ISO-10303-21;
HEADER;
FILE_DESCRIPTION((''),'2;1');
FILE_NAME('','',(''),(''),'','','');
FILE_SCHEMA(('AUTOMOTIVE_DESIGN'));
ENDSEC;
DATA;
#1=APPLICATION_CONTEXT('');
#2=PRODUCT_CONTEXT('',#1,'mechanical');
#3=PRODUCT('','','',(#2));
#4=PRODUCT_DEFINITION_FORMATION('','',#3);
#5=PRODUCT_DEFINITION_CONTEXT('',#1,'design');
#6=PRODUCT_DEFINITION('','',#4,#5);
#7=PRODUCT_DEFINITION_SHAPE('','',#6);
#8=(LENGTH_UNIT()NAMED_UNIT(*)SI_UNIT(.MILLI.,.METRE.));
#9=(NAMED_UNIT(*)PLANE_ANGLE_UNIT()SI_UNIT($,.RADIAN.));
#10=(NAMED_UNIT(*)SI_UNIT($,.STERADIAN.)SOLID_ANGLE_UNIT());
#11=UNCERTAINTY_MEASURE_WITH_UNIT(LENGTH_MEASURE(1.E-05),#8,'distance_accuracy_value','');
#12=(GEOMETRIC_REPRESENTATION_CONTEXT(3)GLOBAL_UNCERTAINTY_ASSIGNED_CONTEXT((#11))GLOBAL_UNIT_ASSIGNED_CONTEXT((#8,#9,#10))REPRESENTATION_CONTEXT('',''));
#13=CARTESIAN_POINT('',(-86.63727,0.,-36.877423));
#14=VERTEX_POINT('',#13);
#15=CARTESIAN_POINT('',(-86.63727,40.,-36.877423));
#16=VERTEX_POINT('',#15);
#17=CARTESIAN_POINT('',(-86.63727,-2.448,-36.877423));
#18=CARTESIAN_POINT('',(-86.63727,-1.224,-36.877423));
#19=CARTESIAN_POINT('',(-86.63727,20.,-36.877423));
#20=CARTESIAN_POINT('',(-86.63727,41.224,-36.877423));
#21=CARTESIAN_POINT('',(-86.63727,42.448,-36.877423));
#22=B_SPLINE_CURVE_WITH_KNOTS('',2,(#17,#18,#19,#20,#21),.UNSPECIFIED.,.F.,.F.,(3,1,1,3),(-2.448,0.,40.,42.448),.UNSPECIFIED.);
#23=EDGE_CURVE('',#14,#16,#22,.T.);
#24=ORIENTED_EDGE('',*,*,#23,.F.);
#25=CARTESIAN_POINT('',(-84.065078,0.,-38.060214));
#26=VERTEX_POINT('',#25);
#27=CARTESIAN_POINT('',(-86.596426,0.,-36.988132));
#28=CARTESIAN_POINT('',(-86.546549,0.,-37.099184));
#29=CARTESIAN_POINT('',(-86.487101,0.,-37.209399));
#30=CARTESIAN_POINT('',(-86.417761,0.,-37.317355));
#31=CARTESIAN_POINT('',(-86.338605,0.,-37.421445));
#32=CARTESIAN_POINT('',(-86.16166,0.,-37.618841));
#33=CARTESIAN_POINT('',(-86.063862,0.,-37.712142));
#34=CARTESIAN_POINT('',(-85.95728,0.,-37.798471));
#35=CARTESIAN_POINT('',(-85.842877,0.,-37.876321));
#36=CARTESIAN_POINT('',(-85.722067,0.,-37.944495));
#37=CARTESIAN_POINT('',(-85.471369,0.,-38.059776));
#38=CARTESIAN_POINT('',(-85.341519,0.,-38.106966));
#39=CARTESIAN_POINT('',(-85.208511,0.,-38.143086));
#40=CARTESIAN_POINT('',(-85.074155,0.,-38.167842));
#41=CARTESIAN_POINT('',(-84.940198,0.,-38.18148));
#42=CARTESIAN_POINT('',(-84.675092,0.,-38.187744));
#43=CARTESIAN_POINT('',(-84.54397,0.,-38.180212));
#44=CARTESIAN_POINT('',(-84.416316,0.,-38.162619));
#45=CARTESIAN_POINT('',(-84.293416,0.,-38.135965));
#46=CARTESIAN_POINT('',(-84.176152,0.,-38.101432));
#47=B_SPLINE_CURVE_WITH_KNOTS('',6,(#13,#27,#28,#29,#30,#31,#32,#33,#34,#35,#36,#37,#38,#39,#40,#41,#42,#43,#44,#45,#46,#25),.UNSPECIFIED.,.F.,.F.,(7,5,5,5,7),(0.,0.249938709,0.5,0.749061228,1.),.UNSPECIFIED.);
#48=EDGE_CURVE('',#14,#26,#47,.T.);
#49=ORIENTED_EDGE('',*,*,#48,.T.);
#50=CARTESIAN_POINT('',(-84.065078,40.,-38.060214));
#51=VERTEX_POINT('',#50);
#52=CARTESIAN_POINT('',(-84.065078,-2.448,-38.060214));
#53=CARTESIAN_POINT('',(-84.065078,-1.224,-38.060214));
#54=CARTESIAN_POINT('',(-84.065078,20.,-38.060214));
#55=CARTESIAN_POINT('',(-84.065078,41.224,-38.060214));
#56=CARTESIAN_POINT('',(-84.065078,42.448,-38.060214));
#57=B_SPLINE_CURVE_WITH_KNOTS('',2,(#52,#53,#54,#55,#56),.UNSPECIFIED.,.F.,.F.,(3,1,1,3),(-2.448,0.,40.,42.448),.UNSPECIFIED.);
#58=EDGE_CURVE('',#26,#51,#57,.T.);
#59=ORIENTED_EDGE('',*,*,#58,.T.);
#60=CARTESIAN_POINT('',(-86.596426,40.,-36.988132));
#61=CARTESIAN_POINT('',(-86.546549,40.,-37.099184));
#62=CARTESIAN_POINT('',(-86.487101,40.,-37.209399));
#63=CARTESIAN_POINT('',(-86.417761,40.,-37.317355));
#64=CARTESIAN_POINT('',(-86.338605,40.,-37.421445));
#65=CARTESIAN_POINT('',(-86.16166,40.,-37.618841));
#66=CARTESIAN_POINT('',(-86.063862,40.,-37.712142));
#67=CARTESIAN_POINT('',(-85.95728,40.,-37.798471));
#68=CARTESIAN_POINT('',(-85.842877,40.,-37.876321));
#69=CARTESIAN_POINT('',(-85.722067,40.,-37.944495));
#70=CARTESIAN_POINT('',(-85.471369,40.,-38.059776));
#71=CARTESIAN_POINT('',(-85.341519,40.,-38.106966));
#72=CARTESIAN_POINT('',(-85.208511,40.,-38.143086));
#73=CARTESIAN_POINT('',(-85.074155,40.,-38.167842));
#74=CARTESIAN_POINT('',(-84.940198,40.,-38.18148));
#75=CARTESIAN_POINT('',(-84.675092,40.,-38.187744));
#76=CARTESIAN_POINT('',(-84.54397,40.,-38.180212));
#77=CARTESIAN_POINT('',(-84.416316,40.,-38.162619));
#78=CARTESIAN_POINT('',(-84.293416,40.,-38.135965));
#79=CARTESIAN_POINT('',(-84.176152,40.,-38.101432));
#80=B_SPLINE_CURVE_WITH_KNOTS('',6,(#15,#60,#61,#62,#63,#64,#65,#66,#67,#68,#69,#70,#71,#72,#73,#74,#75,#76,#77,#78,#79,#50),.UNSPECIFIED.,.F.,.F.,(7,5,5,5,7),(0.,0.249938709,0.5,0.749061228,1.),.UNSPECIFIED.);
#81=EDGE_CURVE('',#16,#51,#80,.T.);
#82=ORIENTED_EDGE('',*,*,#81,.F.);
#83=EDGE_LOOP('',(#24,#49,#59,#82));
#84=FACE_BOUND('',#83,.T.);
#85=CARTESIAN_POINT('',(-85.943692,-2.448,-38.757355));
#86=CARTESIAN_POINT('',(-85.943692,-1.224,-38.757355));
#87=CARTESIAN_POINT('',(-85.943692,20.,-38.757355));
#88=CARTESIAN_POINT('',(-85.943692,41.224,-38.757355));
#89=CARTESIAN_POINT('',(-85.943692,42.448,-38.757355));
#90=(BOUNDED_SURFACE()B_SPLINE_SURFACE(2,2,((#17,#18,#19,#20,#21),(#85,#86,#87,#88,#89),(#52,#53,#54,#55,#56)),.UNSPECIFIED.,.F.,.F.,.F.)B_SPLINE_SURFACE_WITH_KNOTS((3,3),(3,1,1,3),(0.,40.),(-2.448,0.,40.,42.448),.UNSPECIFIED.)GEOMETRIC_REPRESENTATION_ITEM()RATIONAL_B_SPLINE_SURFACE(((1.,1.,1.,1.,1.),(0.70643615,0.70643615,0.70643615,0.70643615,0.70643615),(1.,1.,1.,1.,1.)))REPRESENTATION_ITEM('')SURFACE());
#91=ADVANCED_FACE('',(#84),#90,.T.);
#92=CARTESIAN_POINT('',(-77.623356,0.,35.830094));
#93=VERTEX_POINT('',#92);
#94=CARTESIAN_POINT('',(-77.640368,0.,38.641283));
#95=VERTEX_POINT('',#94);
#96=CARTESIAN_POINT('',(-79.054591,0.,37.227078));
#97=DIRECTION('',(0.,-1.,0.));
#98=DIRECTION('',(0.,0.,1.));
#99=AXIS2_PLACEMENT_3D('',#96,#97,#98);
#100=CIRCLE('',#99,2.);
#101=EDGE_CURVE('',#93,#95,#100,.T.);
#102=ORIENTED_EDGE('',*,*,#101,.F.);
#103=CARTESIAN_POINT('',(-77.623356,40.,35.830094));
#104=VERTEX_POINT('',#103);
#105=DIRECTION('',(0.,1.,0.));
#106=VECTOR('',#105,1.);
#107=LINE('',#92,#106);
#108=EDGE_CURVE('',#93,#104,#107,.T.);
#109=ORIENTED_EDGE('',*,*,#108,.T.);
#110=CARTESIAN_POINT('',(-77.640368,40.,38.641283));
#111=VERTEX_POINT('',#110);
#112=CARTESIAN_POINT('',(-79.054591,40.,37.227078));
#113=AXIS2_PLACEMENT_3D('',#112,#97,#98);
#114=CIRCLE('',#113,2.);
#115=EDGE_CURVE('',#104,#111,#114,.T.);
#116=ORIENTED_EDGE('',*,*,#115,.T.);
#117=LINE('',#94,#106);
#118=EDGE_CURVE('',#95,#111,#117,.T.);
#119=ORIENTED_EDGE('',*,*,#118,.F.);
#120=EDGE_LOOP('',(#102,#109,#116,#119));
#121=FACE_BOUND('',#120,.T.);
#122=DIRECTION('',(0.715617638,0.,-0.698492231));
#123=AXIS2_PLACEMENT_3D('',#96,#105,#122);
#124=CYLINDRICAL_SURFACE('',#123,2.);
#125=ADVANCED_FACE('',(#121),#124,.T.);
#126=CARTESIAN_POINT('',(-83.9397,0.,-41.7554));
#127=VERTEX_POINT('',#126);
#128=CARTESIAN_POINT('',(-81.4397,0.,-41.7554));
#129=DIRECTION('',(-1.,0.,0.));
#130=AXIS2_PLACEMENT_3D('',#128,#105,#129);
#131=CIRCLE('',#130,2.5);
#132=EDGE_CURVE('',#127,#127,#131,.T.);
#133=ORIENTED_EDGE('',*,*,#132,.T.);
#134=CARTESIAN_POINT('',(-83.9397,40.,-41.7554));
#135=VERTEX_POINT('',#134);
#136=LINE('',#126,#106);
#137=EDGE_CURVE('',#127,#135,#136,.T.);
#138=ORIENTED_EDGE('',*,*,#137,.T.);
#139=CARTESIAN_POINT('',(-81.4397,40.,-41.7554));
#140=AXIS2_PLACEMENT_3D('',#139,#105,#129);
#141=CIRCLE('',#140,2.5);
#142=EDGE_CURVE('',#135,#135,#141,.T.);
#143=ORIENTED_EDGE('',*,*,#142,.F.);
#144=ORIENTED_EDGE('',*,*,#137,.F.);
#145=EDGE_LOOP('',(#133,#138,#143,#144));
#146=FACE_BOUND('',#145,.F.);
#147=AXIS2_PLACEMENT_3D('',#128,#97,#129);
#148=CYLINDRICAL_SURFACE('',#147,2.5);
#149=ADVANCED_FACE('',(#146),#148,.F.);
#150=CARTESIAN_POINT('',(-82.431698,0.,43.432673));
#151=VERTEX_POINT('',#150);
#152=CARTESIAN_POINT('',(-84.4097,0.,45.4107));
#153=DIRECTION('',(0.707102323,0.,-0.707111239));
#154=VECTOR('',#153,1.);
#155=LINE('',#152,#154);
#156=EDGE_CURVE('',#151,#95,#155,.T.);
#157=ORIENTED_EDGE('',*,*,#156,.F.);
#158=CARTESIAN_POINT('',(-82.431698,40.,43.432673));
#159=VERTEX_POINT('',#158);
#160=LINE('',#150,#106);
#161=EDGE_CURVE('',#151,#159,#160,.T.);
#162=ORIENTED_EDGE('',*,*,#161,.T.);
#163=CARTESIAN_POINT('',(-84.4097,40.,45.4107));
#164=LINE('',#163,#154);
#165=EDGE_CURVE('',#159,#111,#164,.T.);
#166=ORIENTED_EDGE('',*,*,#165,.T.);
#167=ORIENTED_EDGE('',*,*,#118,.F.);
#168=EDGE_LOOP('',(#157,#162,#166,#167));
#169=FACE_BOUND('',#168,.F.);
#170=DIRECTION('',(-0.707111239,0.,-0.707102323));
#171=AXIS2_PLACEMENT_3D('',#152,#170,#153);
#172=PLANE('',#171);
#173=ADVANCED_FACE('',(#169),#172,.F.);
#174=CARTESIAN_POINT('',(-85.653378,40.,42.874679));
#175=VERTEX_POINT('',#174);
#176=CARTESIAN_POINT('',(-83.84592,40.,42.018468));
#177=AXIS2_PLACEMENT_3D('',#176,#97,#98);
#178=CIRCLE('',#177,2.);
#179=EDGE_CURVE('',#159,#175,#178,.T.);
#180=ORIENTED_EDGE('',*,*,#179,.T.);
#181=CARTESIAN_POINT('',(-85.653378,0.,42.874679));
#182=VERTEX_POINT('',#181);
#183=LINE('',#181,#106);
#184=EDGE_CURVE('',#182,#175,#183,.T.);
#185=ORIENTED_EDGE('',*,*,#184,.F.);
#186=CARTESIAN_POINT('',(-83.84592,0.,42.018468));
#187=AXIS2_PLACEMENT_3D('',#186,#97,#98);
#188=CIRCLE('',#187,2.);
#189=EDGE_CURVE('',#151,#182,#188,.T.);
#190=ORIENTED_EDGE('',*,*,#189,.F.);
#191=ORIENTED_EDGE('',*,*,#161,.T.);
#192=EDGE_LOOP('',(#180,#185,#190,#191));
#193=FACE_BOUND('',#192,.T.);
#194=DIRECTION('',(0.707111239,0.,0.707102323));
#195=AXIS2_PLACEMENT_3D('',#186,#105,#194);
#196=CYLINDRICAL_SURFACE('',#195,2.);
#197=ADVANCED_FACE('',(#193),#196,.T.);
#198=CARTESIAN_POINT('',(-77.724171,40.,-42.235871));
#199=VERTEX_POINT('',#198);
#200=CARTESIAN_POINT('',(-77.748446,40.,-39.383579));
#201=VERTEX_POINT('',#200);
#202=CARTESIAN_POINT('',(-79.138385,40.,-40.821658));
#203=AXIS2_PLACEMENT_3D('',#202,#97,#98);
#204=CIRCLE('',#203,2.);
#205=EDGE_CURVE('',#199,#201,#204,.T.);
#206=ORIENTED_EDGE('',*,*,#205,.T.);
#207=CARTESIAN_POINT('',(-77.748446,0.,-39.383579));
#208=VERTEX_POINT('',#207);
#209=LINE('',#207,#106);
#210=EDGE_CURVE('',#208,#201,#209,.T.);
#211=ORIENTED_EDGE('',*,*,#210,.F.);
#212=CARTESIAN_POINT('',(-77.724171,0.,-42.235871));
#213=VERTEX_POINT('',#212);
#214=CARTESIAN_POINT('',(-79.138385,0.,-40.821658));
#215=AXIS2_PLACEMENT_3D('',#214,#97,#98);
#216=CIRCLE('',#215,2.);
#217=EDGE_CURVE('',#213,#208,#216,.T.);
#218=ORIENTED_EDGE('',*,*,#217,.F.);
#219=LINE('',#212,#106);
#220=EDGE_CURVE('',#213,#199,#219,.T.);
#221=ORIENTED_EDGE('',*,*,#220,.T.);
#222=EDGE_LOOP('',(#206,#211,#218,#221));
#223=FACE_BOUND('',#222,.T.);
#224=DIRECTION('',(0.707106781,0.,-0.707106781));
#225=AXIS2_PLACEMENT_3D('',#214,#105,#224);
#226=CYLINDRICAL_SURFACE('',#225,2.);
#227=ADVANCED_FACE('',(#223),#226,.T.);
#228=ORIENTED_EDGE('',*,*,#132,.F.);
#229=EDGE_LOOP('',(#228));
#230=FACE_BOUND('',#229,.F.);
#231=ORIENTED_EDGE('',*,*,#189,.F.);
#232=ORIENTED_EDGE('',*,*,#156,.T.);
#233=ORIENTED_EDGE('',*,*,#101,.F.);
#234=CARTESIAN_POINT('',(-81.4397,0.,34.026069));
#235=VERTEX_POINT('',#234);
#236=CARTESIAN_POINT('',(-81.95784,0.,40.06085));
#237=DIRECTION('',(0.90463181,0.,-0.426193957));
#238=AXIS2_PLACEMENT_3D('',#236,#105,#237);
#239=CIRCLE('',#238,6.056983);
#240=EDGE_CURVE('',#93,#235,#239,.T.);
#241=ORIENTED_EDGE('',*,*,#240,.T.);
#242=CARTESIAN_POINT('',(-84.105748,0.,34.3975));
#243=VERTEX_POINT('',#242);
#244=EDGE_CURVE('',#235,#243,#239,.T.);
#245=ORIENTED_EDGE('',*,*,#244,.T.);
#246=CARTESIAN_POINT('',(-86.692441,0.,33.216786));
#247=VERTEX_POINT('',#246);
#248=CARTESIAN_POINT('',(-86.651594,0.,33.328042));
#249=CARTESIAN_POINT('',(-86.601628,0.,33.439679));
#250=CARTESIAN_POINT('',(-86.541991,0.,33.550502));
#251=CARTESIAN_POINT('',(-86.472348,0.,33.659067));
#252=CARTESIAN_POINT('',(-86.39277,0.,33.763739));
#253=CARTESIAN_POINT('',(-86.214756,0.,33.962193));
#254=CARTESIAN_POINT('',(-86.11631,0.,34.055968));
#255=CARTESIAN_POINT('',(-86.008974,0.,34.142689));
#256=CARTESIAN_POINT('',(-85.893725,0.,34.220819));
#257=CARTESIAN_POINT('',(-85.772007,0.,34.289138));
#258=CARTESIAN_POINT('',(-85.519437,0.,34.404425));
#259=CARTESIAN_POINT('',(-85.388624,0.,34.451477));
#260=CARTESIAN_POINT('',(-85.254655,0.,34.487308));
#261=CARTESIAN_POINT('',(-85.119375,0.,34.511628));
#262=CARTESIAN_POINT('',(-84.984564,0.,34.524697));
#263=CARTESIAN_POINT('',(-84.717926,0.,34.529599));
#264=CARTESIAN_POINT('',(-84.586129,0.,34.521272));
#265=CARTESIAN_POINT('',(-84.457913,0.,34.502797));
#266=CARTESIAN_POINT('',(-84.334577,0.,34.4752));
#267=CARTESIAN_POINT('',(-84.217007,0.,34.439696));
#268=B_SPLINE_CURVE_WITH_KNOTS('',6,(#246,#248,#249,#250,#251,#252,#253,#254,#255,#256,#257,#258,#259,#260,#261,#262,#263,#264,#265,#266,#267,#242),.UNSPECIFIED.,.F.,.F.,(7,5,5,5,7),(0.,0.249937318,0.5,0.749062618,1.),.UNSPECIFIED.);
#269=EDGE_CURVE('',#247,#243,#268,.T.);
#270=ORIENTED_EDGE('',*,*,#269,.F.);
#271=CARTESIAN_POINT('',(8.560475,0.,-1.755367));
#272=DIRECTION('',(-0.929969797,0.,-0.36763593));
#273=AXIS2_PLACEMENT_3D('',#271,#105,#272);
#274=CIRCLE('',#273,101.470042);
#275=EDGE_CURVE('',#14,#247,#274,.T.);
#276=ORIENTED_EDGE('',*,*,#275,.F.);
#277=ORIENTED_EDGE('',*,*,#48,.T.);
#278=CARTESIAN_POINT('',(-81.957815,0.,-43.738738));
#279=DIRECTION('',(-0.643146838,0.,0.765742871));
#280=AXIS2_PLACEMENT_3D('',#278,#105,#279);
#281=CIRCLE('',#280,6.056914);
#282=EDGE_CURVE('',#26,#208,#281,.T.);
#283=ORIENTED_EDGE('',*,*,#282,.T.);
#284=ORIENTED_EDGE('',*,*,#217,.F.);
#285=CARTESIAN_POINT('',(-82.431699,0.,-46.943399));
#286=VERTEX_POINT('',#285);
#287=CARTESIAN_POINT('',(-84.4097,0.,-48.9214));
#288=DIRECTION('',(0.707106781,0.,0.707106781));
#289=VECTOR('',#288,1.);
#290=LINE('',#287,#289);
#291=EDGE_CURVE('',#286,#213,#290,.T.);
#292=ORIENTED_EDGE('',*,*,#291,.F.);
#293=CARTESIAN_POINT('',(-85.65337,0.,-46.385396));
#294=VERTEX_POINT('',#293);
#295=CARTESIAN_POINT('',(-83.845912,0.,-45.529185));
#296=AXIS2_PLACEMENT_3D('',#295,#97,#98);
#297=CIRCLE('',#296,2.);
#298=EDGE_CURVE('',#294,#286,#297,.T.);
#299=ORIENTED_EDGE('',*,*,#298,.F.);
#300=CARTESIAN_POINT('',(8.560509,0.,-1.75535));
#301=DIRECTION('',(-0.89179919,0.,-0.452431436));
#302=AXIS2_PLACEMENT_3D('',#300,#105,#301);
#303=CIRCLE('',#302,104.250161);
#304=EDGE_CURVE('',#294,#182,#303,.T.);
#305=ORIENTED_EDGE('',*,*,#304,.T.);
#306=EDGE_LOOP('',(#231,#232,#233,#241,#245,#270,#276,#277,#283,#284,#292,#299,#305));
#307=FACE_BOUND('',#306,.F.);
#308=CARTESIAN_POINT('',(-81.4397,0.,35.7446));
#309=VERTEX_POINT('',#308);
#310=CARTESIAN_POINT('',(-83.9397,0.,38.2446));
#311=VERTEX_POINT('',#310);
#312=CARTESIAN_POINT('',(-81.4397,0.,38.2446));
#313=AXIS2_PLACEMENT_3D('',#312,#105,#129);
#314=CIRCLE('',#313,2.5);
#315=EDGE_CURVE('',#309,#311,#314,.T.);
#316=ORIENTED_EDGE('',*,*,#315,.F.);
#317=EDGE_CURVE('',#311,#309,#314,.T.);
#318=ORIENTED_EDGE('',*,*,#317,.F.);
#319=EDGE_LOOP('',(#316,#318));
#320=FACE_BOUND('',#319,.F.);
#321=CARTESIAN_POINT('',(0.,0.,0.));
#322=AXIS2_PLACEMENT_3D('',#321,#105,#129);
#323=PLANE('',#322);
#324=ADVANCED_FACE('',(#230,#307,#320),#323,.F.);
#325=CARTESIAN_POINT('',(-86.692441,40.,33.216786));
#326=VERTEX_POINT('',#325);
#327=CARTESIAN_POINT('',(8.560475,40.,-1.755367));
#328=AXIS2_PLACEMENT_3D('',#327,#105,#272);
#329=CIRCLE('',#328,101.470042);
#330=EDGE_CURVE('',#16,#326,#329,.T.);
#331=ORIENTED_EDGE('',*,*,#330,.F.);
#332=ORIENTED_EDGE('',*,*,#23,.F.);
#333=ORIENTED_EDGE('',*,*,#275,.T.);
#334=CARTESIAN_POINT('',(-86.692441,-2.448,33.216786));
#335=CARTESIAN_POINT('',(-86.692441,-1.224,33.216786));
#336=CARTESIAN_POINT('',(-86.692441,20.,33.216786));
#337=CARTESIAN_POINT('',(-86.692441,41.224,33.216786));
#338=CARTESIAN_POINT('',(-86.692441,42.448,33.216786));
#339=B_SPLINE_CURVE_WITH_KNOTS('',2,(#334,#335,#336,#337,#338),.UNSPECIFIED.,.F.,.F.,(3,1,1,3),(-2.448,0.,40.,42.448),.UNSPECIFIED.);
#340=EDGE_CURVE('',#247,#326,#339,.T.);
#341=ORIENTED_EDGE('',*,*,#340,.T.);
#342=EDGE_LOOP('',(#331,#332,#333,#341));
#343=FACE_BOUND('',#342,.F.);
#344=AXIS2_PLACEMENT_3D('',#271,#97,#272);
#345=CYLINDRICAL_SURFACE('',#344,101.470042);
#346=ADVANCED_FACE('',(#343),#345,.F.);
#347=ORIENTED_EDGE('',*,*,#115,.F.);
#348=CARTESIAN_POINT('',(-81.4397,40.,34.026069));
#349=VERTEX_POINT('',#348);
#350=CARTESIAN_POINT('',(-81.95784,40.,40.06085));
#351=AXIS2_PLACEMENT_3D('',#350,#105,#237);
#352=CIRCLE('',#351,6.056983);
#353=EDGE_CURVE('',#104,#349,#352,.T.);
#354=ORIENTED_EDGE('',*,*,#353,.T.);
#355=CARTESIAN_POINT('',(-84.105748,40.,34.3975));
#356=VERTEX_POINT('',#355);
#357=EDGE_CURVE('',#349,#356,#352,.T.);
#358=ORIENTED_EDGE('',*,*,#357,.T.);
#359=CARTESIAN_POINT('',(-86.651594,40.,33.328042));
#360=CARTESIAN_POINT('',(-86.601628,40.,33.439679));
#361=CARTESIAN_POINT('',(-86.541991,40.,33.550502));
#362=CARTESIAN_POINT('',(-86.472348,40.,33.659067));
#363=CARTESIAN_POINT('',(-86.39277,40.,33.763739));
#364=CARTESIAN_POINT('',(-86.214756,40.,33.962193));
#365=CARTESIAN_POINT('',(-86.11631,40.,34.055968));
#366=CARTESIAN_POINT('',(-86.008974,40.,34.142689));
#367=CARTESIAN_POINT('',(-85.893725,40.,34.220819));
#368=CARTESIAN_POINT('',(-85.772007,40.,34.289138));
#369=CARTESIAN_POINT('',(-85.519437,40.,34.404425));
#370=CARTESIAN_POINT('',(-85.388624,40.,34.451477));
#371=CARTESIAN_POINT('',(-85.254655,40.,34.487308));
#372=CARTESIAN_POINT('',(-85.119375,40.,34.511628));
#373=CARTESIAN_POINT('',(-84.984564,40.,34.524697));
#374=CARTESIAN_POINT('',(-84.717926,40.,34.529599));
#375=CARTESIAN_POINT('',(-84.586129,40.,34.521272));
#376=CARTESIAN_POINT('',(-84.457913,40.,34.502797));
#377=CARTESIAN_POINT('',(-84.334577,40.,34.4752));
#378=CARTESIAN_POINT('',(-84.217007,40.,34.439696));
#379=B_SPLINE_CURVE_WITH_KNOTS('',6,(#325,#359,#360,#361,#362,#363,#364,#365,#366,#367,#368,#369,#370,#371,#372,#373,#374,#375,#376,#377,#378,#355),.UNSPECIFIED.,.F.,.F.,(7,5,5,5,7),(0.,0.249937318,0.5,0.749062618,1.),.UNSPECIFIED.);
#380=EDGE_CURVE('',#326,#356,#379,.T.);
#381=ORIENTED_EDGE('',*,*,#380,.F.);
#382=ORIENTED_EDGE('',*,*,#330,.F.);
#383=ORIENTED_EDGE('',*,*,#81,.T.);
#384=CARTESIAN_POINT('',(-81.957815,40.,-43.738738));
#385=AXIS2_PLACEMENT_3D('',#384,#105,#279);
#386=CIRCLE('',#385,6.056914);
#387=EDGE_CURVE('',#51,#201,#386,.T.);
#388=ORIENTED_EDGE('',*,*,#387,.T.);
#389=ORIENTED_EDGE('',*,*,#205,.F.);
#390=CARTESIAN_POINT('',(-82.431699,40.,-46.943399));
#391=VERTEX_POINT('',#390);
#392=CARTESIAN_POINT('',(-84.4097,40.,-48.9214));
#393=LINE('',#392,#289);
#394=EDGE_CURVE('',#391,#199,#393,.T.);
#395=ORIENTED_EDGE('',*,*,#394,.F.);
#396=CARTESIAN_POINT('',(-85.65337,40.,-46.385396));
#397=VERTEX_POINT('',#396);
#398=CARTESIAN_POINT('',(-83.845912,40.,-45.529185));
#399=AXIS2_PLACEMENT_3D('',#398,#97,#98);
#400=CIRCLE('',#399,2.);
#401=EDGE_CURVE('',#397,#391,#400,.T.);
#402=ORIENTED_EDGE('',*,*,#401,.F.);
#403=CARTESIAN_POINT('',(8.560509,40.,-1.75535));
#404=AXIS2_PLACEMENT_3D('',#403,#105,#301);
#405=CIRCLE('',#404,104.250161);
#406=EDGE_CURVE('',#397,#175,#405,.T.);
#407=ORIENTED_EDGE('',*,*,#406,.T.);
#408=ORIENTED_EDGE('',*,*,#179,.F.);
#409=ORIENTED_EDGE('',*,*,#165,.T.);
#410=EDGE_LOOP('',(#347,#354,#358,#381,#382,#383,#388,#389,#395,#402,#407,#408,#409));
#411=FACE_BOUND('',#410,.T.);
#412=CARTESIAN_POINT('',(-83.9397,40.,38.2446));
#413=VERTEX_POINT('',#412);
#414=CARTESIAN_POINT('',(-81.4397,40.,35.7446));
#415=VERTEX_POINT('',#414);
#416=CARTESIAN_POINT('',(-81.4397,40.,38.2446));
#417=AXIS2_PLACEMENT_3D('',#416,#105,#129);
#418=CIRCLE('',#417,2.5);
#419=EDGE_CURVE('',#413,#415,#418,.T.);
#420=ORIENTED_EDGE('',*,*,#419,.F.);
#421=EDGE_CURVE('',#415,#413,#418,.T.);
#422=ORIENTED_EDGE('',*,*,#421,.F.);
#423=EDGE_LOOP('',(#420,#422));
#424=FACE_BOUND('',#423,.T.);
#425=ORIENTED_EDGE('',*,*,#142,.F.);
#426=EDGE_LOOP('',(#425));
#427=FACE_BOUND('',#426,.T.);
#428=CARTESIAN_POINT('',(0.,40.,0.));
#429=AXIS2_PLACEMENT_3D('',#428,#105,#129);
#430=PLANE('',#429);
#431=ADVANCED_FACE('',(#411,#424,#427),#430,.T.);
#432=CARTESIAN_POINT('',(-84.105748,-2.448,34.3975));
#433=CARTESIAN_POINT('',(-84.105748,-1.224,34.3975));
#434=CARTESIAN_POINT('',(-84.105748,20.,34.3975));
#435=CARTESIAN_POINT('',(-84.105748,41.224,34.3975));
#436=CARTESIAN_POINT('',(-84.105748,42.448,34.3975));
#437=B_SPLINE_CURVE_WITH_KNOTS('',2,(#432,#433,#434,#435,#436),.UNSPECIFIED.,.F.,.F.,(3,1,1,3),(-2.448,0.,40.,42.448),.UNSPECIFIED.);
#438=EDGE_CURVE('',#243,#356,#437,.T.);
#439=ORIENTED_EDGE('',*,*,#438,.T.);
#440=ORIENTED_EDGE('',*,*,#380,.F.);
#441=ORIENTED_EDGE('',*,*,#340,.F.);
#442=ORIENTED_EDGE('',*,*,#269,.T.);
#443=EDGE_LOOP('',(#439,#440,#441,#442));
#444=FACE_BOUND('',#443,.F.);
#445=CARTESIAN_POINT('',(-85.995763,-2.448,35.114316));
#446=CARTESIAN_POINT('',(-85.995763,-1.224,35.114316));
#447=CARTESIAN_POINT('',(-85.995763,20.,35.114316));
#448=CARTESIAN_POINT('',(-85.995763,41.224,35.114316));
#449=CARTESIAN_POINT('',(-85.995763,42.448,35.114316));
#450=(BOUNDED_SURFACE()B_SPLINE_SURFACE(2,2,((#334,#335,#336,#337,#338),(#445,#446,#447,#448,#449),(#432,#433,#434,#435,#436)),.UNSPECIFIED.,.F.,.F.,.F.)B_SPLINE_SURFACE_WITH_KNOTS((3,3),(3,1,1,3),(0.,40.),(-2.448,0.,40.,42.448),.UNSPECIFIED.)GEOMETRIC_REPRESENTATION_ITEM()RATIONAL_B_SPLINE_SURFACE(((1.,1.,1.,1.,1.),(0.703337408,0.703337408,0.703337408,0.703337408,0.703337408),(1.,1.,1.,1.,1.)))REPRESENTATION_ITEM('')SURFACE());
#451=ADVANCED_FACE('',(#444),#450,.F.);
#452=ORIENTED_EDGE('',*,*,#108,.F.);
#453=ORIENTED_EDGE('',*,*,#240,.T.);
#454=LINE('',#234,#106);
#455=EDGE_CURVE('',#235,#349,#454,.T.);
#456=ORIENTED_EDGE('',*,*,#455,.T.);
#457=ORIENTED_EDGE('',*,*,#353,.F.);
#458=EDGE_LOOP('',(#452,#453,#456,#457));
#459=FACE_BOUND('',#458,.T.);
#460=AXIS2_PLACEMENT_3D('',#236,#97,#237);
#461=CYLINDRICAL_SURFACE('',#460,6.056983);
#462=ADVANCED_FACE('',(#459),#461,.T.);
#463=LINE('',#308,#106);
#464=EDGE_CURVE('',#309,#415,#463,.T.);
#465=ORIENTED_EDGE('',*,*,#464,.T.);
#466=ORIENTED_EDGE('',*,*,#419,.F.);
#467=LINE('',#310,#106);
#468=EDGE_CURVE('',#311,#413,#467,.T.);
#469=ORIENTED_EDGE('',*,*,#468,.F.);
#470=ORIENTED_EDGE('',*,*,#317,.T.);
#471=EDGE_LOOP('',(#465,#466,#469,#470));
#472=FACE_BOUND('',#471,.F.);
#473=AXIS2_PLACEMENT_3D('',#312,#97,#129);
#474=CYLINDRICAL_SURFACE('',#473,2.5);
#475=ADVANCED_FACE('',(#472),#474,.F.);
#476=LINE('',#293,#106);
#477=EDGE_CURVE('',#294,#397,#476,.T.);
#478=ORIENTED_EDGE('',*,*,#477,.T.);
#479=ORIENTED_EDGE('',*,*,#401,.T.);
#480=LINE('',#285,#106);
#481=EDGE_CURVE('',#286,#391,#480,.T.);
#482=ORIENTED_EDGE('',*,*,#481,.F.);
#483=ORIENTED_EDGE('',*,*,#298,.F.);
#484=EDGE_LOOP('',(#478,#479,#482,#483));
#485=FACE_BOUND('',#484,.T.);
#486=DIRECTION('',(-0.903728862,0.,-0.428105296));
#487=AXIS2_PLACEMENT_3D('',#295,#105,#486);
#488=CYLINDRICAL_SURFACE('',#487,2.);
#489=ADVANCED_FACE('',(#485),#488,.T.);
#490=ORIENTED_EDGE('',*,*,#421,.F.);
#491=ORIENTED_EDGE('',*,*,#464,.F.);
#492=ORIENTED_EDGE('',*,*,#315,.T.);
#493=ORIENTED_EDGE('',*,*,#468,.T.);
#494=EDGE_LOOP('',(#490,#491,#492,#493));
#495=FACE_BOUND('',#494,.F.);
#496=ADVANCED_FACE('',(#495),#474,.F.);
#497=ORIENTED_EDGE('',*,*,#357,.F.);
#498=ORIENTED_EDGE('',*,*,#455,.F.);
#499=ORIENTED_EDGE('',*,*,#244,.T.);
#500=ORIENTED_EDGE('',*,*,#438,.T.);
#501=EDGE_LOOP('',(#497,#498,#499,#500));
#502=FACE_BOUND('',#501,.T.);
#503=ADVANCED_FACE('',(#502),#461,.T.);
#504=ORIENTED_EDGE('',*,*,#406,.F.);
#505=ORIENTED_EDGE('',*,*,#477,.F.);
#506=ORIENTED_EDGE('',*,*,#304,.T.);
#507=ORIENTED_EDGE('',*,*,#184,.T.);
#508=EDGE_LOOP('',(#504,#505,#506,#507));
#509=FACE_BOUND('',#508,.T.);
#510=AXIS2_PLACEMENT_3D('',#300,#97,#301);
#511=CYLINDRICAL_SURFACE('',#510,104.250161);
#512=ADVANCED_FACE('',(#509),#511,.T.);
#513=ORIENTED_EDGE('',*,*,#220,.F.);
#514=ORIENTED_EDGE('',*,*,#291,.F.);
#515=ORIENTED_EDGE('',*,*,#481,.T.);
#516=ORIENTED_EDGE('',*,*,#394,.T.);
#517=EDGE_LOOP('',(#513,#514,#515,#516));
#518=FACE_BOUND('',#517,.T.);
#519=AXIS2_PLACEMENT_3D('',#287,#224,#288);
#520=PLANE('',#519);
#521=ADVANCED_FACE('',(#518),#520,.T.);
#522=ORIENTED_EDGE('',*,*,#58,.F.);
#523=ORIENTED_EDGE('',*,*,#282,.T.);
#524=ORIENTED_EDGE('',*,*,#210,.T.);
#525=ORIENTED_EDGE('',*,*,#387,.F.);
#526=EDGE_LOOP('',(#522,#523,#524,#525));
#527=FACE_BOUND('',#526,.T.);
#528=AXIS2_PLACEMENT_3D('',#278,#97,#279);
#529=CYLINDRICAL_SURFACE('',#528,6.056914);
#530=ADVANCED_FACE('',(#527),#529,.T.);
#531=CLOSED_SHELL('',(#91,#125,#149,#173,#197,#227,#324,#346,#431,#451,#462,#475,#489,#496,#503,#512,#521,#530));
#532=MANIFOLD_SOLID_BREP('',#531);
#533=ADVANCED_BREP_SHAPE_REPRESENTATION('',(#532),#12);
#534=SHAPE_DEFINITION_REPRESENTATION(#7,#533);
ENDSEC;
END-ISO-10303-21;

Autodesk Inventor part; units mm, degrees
ref_plane "YZ Plane" through (0, 0, 0) normal (1, 0, 0) x (0, 1, 0)
ref_plane "XZ Plane" through (0, 0, 0) normal (0, 1, 0) x (-1, 0, 0)
ref_plane "XY Plane" through (0, 0, 0) normal (0, 0, 1) x (1, 0, 0)
sketch "Sketch1" plane through (0, 0, 0) normal (0, 1, 0) x (-1, 0, 0)
  line L0 (-57.8698, 32.3928) -> (-57.8698, 32.0292)
  line L1 (-57.8698, 32.0292) -> (-57.8698, 18.4092)
  line L2 (-57.8698, 18.4092) -> (-57.8698, 4.7892)
  line L3 (-57.8698, 4.7892) -> (-57.8698, -8.8308)
  line L4 (-57.8698, -8.8308) -> (-57.8698, -22.4508)
  line L5 (-57.8698, -1.839) -> (-57.8698, -36.0708)
  line L6 (-57.8698, -36.0708) -> (-54.7847, -36.7468)
  line L7 (-54.7847, -36.7468) -> (-50.239, -34.4141)
  line L8 (-50.239, -34.4141) -> (-38.1725, -14.554)
  line L9 (-38.1725, -14.554) -> (-34.8422, -12.8451)
  line L10 (-34.8422, -12.8451) -> (-8.0341, -30.0588)
  line L11 (-8.0341, -30.0588) -> (-8.0341, -78.5822)
  line L12 (-8.0341, -78.5822) -> (-8.0341, -99.6831)
  line L13 (-8.0341, -99.6831) -> (-7.0952, -101.449)
  line L14 (-7.0952, -101.449) -> (-2.0952, -101.449)
  line L15 (-1.1562, -99.6831) -> (-2.0952, -101.449)
  line L16 (-1.1562, -78.5822) -> (-1.1562, -99.6831)
  line L17 (-1.1562, -30.0588) -> (-1.1562, -78.5822)
  line L18 (-1.1562, -30.0588) -> (21.4276, -7.475)
  line L19 (21.4276, -7.475) -> (24.147, -4.7556)
  line L20 (24.147, -4.7556) -> (89.8399, -4.7556)
  line L21 (89.8399, -4.7556) -> (91.6058, -3.8166)
  line L22 (91.6058, 0.1386) -> (91.6058, -3.8166)
  line L23 (89.8399, 1.0776) -> (91.6058, 0.1386)
  line L24 (24.147, 1.0776) -> (89.8399, 1.0776)
  line L25 (21.4276, 3.797) -> (24.147, 1.0776)
  line L26 (-1.1562, 26.3808) -> (21.4276, 3.797)
  line L27 (-1.1562, 26.3808) -> (-1.1562, 74.9042)
  line L28 (-1.1562, 74.9042) -> (-1.1562, 96.0051)
  line L29 (-1.1562, 96.0051) -> (-2.0952, 97.771)
  line L30 (-7.0952, 97.771) -> (-2.0952, 97.771)
  line L31 (-8.0341, 96.0051) -> (-7.0952, 97.771)
  line L32 (-8.0341, 74.9042) -> (-8.0341, 96.0051)
  line L33 (-8.0341, 74.9042) -> (-8.0341, 96.0051)
  line L34 (-8.0341, 26.3808) -> (-8.0341, 74.9042)
  line L35 (-8.0341, 26.3808) -> (-8.0341, 74.9042)
  line L36 (-8.0341, 26.3808) -> (-8.0341, 74.9042)
  line L37 (-8.0341, 26.3808) -> (-8.0341, 74.9042)
  line L38 (-34.8422, 9.1671) -> (-8.0341, 26.3808)
  line L39 (-38.1725, 10.876) -> (-34.8422, 9.1671)
  line L40 (-50.239, 30.7361) -> (-38.1725, 10.876)
  line L41 (-54.7847, 33.0688) -> (-50.239, 30.7361)
  line L42 (-57.8698, 32.3928) -> (-54.7847, 33.0688)
  line L43 (-57.8698, -1.839) -> (-57.8698, -36.0708)
  line L44 (-57.8698, -1.839) -> (-57.8698, -36.0708)
  line L45 (-57.8698, -1.839) -> (-57.8698, -36.0708)
  line L46 (-57.8698, -36.0708) -> (-54.7847, -36.7468)
  line L47 (-54.7847, -36.7468) -> (-50.239, -34.4141)
  line L48 (-50.239, -34.4141) -> (-38.1725, -14.554)
  line L49 (-38.1725, -14.554) -> (-34.8422, -12.8451)
  line L50 (-34.8422, -12.8451) -> (-8.0341, -30.0588)
  line L51 (-8.0341, -30.0588) -> (-8.0341, -78.5822)
  line L52 (-8.0341, -78.5822) -> (-8.0341, -99.6831)
  line L53 (-8.0341, -99.6831) -> (-7.0952, -101.449)
  line L54 (-7.0952, -101.449) -> (-2.0952, -101.449)
  line L55 (-1.1562, -99.6831) -> (-2.0952, -101.449)
  line L56 (-1.1562, -78.5822) -> (-1.1562, -99.6831)
  line L57 (-1.1562, -30.0588) -> (-1.1562, -78.5822)
  line L58 (-1.1562, -30.0588) -> (21.4276, -7.475)
  line L59 (21.4276, -7.475) -> (24.147, -4.7556)
  line L60 (24.147, -4.7556) -> (89.8399, -4.7556)
  line L61 (89.8399, -4.7556) -> (91.6058, -3.8166)
  line L62 (91.6058, 0.1386) -> (91.6058, -3.8166)
  line L63 (89.8399, 1.0776) -> (91.6058, 0.1386)
  line L64 (24.147, 1.0776) -> (89.8399, 1.0776)
  line L65 (21.4276, 3.797) -> (24.147, 1.0776)
  line L66 (-1.1562, 26.3808) -> (21.4276, 3.797)
  line L67 (-1.1562, 26.3808) -> (-1.1562, 74.9042)
  line L68 (-1.1562, 74.9042) -> (-1.1562, 96.0051)
  line L69 (-1.1562, 96.0051) -> (-2.0952, 97.771)
  line L70 (-7.0952, 97.771) -> (-2.0952, 97.771)
  line L71 (-8.0341, 96.0051) -> (-7.0952, 97.771)
  line L72 (-8.0341, 74.9042) -> (-8.0341, 96.0051)
  line L73 (-8.0341, 69.2148) -> (-8.0341, 83.4928)
  line L74 (-8.0341, 54.9368) -> (-8.0341, 69.2148)
  line L75 (-8.0341, 40.6588) -> (-8.0341, 54.9368)
  line L76 (-8.0341, 26.3808) -> (-8.0341, 40.6588)
  line L77 (-34.8422, 9.1671) -> (-8.0341, 26.3808)
  line L78 (-38.1725, 10.876) -> (-34.8422, 9.1671)
  line L79 (-50.239, 30.7361) -> (-38.1725, 10.876)
  line L80 (-54.7847, 33.0688) -> (-50.239, 30.7361)
  line L81 (-57.8698, 32.3928) -> (-54.7847, 33.0688)
  line L82 (-57.8698, 32.3928) -> (-57.8698, 32.0292)
  line L83 (-57.8698, 32.0292) -> (-57.8698, 18.4092)
  line L84 (-57.8698, -1.839) -> (-57.8698, 26.3808)
  line L85 (-57.8698, -1.839) -> (-57.8698, 26.3808)
  line L86 (-8.0341, 26.3808) -> (-8.0341, 40.6588)
  line L87 (-34.8422, 9.1671) -> (-8.0341, 26.3808)
  line L88 (-38.1725, 10.876) -> (-34.8422, 9.1671)
  line L89 (-50.239, 30.7361) -> (-38.1725, 10.876)
  line L90 (-54.7847, 33.0688) -> (-50.239, 30.7361)
  line L91 (-57.8698, 32.3928) -> (-54.7847, 33.0688)
  line L92 (-57.8698, 32.3928) -> (-57.8698, 32.0292)
  line L93 (-57.8698, 32.0292) -> (-57.8698, 18.4092)
  line L94 (-57.8698, -1.839) -> (-57.8698, 26.3808)
  line L95 (-57.8698, -1.839) -> (-57.8698, 26.3808)
  line L96 (-57.8698, -1.839) -> (-57.8698, -36.0708)
  line L97 (-57.8698, -1.839) -> (-57.8698, -36.0708)
  line L98 (-57.8698, -1.839) -> (-57.8698, -36.0708)
  line L99 (-57.8698, -36.0708) -> (-54.7847, -36.7468)
  line L100 (-54.7847, -36.7468) -> (-50.239, -34.4141)
  line L101 (-50.239, -34.4141) -> (-38.1725, -14.554)
  line L102 (-38.1725, -14.554) -> (-34.8422, -12.8451)
  line L103 (-34.8422, -12.8451) -> (-8.0341, -30.0588)
  line L104 (-8.0341, -30.0588) -> (-8.0341, -78.5822)
  line L105 (-8.0341, -78.5822) -> (-8.0341, -99.6831)
  line L106 (-8.0341, -99.6831) -> (-7.0952, -101.449)
  line L107 (-7.0952, -101.449) -> (-2.0952, -101.449)
  line L108 (-1.1562, -99.6831) -> (-2.0952, -101.449)
  line L109 (-1.1562, -78.5822) -> (-1.1562, -99.6831)
  line L110 (-1.1562, -30.0588) -> (-1.1562, -78.5822)
  line L111 (-1.1562, -30.0588) -> (21.4276, -7.475)
  line L112 (21.4276, -7.475) -> (24.147, -4.7556)
  line L113 (24.147, -4.7556) -> (89.8399, -4.7556)
  line L114 (89.8399, -4.7556) -> (91.6058, -3.8166)
  line L115 (91.6058, 0.1386) -> (91.6058, -3.8166)
  line L116 (89.8399, 1.0776) -> (91.6058, 0.1386)
  line L117 (24.147, 1.0776) -> (89.8399, 1.0776)
  line L118 (21.4276, 3.797) -> (24.147, 1.0776)
  line L119 (-1.1562, 26.3808) -> (21.4276, 3.797)
  line L120 (-1.1562, 26.3808) -> (-1.1562, 74.9042)
  line L121 (-1.1562, 74.9042) -> (-1.1562, 96.0051)
  line L122 (-1.1562, 96.0051) -> (-2.0952, 97.771)
  line L123 (-7.0952, 97.771) -> (-2.0952, 97.771)
  line L124 (-8.0341, 96.0051) -> (-7.0952, 97.771)
  line L125 (-8.0341, 74.9042) -> (-8.0341, 96.0051)
  line L126 (-8.0341, 69.2148) -> (-8.0341, 83.4928)
  line L127 (-8.0341, 54.9368) -> (-8.0341, 69.2148)
  line L128 (-8.0341, 26.3808) -> (-8.0341, 74.9042)
  line L129 (-57.8698, -1.839) -> (-57.8698, 26.3808)
  line L130 (-57.8698, -1.839) -> (-57.8698, 26.3808)
  line L131 (-57.8698, -1.839) -> (-57.8698, 26.3808)
  line L132 (-57.8698, -1.839) -> (-57.8698, -36.0708)
  line L133 (-57.8698, -1.839) -> (-57.8698, -36.0708)
  line L134 (-57.8698, -1.839) -> (-57.8698, -36.0708)
  line L135 (-57.8698, -36.0708) -> (-54.7847, -36.7468)
  line L136 (-54.7847, -36.7468) -> (-50.239, -34.4141)
  line L137 (-50.239, -34.4141) -> (-38.1725, -14.554)
  line L138 (-38.1725, -14.554) -> (-34.8422, -12.8451)
  line L139 (-34.8422, -12.8451) -> (-8.0341, -30.0588)
  line L140 (-8.0341, -30.0588) -> (-8.0341, -78.5822)
  line L141 (-8.0341, -78.5822) -> (-8.0341, -99.6831)
  line L142 (-8.0341, -99.6831) -> (-7.0952, -101.449)
  line L143 (-7.0952, -101.449) -> (-2.0952, -101.449)
  line L144 (-1.1562, -99.6831) -> (-2.0952, -101.449)
  line L145 (-1.1562, -78.5822) -> (-1.1562, -99.6831)
  line L146 (-1.1562, -30.0588) -> (-1.1562, -78.5822)
  line L147 (-1.1562, -30.0588) -> (21.4276, -7.475)
  line L148 (21.4276, -7.475) -> (24.147, -4.7556)
  line L149 (24.147, -4.7556) -> (89.8399, -4.7556)
  line L150 (89.8399, -4.7556) -> (91.6058, -3.8166)
  line L151 (91.6058, 0.1386) -> (91.6058, -3.8166)
  line L152 (89.8399, 1.0776) -> (91.6058, 0.1386)
  line L153 (24.147, 1.0776) -> (89.8399, 1.0776)
  line L154 (21.4276, 3.797) -> (24.147, 1.0776)
  line L155 (-1.1562, 26.3808) -> (21.4276, 3.797)
  line L156 (-1.1562, 26.3808) -> (-1.1562, 74.9042)
  line L157 (-1.1562, 74.9042) -> (-1.1562, 96.0051)
  line L158 (-1.1562, 96.0051) -> (-2.0952, 97.771)
  line L159 (-7.0952, 97.771) -> (-2.0952, 97.771)
  line L160 (-8.0341, 96.0051) -> (-7.0952, 97.771)
  line L161 (-8.0341, 74.9042) -> (-8.0341, 96.0051)
  line L162 (-8.0341, 69.2148) -> (-8.0341, 83.4928)
  line L163 (-8.0341, 54.9368) -> (-8.0341, 69.2148)
  line L164 (-8.0341, 40.6588) -> (-8.0341, 54.9368)
  line L165 (-8.0341, 26.3808) -> (-8.0341, 40.6588)
  line L166 (-34.8422, 9.1671) -> (-8.0341, 26.3808)
  line L167 (-38.1725, 10.876) -> (-34.8422, 9.1671)
  line L168 (-50.239, 30.7361) -> (-38.1725, 10.876)
  line L169 (-54.7847, 33.0688) -> (-50.239, 30.7361)
  line L170 (-57.8698, 32.3928) -> (-54.7847, 33.0688)
  line L171 (-57.8698, 32.3928) -> (-57.8698, 32.0292)
  line L172 (-57.8698, 26.3808) -> (-57.8698, 32.0292)
  line L173 (-57.8698, 32.0292) -> (-57.8698, 32.3928)
  line L174 (-57.8698, 32.3928) -> (-54.7847, 33.0688)
  line L175 (-54.7847, 33.0688) -> (-50.239, 30.7361)
  line L176 (-50.239, 30.7361) -> (-38.1725, 10.876)
  line L177 (-38.1725, 10.876) -> (-34.8422, 9.1671)
  line L178 (-34.8422, 9.1671) -> (-8.0341, 26.3808)
  line L179 (-8.0341, 26.3808) -> (-8.0341, 74.9042)
  line L180 (-8.0341, 74.9042) -> (-8.0341, 96.0051)
  line L181 (-8.0341, 96.0051) -> (-7.0952, 97.771)
  line L182 (-7.0952, 97.771) -> (-2.0952, 97.771)
  line L183 (-2.0952, 97.771) -> (-1.1562, 96.0051)
  line L184 (-1.1562, 96.0051) -> (-1.1562, 74.9042)
  line L185 (-1.1562, 74.9042) -> (-1.1562, 26.3808)
  line L186 (-1.1562, 26.3808) -> (21.4276, 3.797)
  line L187 (21.4276, 3.797) -> (24.147, 1.0776)
  line L188 (24.147, 1.0776) -> (89.8399, 1.0776)
  line L189 (89.8399, 1.0776) -> (91.6058, 0.1386)
  line L190 (91.6058, 0.1386) -> (91.6058, -3.8166)
  line L191 (91.6058, -3.8166) -> (89.8399, -4.7556)
  line L192 (89.8399, -4.7556) -> (24.147, -4.7556)
  line L193 (24.147, -4.7556) -> (21.4276, -7.475)
  line L194 (21.4276, -7.475) -> (-1.1562, -30.0588)
  line L195 (-57.8698, 32.0292) -> (-57.8698, 26.3808)
  line L196 (-57.8698, 26.3808) -> (-57.8698, -1.839)
  line L197 (-57.8698, -1.839) -> (-57.8698, -36.0708)
  line L198 (-57.8698, -36.0708) -> (-54.7847, -36.7468)
  line L199 (-54.7847, -36.7468) -> (-50.239, -34.4141)
  line L200 (-50.239, -34.4141) -> (-38.1725, -14.554)
  line L201 (-38.1725, -14.554) -> (-34.8422, -12.8451)
  line L202 (-34.8422, -12.8451) -> (-8.0341, -30.0588)
  line L203 (-8.0341, -30.0588) -> (-8.0341, -78.5822)
  line L204 (-8.0341, -78.5822) -> (-8.0341, -99.6831)
  line L205 (-8.0341, -99.6831) -> (-7.0952, -101.449)
  line L206 (-7.0952, -101.449) -> (-2.0952, -101.449)
  line L207 (-2.0952, -101.449) -> (-1.1562, -99.6831)
  line L208 (-1.1562, -99.6831) -> (-1.1562, -78.5822)
  line L209 (-1.1562, -78.5822) -> (-1.1562, -30.0588)
  line L210 (77.614, -1.839) -> (78.114, -1.839)
  line L211 (78.114, -1.839) -> (78.614, -1.839)
  line L212 (64.1222, -1.839) -> (64.6222, -1.839)
  line L213 (64.6222, -1.839) -> (65.1222, -1.839)
  line L214 (51.6304, -1.839) -> (51.1304, -1.839)
  line L215 (51.1304, -1.839) -> (50.6304, -1.839)
  line L216 (38.1386, -1.839) -> (37.6386, -1.839)
  line L217 (37.6386, -1.839) -> (37.1386, -1.839)
  line L218 (-57.8698, -22.4508) -> (-55.8698, -22.4508)
  line L219 (-55.8698, -22.4508) -> (-55.8698, -22.9508)
  line L220 (-55.8698, -22.4508) -> (-55.8698, -21.9508)
  line L221 (-57.8698, -8.8308) -> (-55.8698, -8.8308)
  line L222 (-55.8698, -8.8308) -> (-55.8698, -9.3308)
  line L223 (-55.8698, -8.8308) -> (-55.8698, -8.3308)
  line L224 (-57.8698, 4.7892) -> (-55.8698, 4.7892)
  line L225 (-55.8698, 4.7892) -> (-55.8698, 4.2892)
  line L226 (-55.8698, 4.7892) -> (-55.8698, 5.2892)
  line L227 (-55.8698, 18.4092) -> (-55.8698, 18.9092)
  line L228 (-55.8698, 18.4092) -> (-55.8698, 17.9092)
  line L229 (-57.8698, 18.4092) -> (-55.8698, 18.4092)
  line L230 (-6.0341, -87.1708) -> (-6.0341, -87.6708)
  line L231 (-6.0341, -44.3368) -> (-6.0341, -43.8368)
  line L232 (-8.0341, -87.1708) -> (-6.0341, -87.1708)
  line L233 (-6.0341, -87.1708) -> (-6.0341, -86.6708)
  line L234 (-6.0341, -72.8928) -> (-6.0341, -73.3928)
  line L235 (-8.0341, -72.8928) -> (-6.0341, -72.8928)
  line L236 (-8.0341, -58.6148) -> (-6.0341, -58.6148)
  line L237 (-6.0341, -44.3368) -> (-6.0341, -44.8368)
  line L238 (-8.0341, -44.3368) -> (-6.0341, -44.3368)
  line L239 (-6.0341, -58.6148) -> (-6.0341, -58.1148)
  line L240 (-6.0341, -58.6148) -> (-6.0341, -59.1148)
  line L241 (-6.0341, -72.8928) -> (-6.0341, -72.3928)
  line L242 (-8.0341, 83.4928) -> (-6.0341, 83.4928)
  line L243 (-6.0341, 83.4928) -> (-6.0341, 82.9928)
  line L244 (-6.0341, 83.4928) -> (-6.0341, 83.9928)
  line L245 (-8.0341, 69.2148) -> (-6.0341, 69.2148)
  line L246 (-6.0341, 69.2148) -> (-6.0341, 68.7148)
  line L247 (-6.0341, 69.2148) -> (-6.0341, 69.7148)
  line L248 (-8.0341, 54.9368) -> (-6.0341, 54.9368)
  line L249 (-6.0341, 54.9368) -> (-6.0341, 54.4368)
  line L250 (-6.0341, 54.9368) -> (-6.0341, 55.4368)
  line L251 (-6.0341, 40.6588) -> (-6.0341, 41.1588)
  line L252 (-6.0341, 40.6588) -> (-6.0341, 40.1588)
  line L253 (-8.0341, 40.6588) -> (-6.0341, 40.6588)
  arc A0 (-93.5154, -61.1235) -> (-93.5154, 57.6128) centre (-175.9423, -1.7554) ccw
  arc A1 (85.0786, -49.2607) -> (85.0786, 45.75) centre (-8.5603, -1.7554) ccw
  arc A2 (-30.2114, -104.4989) -> (38.945, -95.3943) centre (-8.5603, -1.7554) ccw
  line L254 (78.614, -1.839) -> (78.614, -0.439)
  line L255 (78.614, -0.439) -> (83.614, -0.439)
  line L256 (83.614, -0.439) -> (83.614, -3.239)
  line L257 (83.614, -3.239) -> (78.614, -3.239)
  line L258 (78.614, -3.239) -> (78.614, -1.839)
  line L259 (78.114, -1.839) -> (78.114, -1.2219)
  line L260 (77.614, -1.839) -> (77.614, -0.439)
  line L261 (72.614, -3.239) -> (77.614, -3.239)
  line L262 (77.614, -0.439) -> (72.614, -0.439)
  line L263 (72.614, -0.439) -> (72.614, -3.239)
  line L264 (77.614, -3.239) -> (77.614, -1.839)
  line L265 (64.1222, -1.839) -> (64.1222, -0.439)
  line L266 (64.1222, -3.239) -> (64.1222, -1.839)
  line L267 (64.1222, -0.439) -> (59.9222, -0.439)
  line L268 (59.9222, -3.239) -> (64.1222, -3.239)
  line L269 (59.9222, -0.439) -> (59.9222, -3.239)
  line L270 (70.1222, -0.439) -> (70.1222, -3.239)
  line L271 (65.1222, -0.439) -> (70.1222, -0.439)
  line L272 (70.1222, -3.239) -> (65.1222, -3.239)
  line L273 (65.1222, -1.839) -> (65.1222, -0.439)
  line L274 (65.1222, -3.239) -> (65.1222, -1.839)
  line L275 (50.6304, -1.839) -> (50.6304, -0.439)
  line L276 (50.6304, -3.239) -> (50.6304, -1.839)
  line L277 (50.6304, -0.439) -> (46.4304, -0.439)
  line L278 (46.4304, -3.239) -> (50.6304, -3.239)
  line L279 (46.4304, -0.439) -> (46.4304, -3.239)
  line L280 (56.6304, -0.439) -> (56.6304, -3.239)
  line L281 (51.6304, -0.439) -> (56.6304, -0.439)
  line L282 (56.6304, -3.239) -> (51.6304, -3.239)
  line L283 (51.6304, -1.839) -> (51.6304, -0.439)
  line L284 (51.6304, -3.239) -> (51.6304, -1.839)
  line L285 (37.1386, -1.839) -> (37.1386, -0.439)
  line L286 (37.1386, -3.239) -> (37.1386, -1.839)
  line L287 (37.1386, -0.439) -> (32.9386, -0.439)
  line L288 (32.9386, -3.239) -> (37.1386, -3.239)
  line L289 (32.9386, -0.439) -> (32.9386, -3.239)
  line L290 (43.1386, -0.439) -> (43.1386, -3.239)
  line L291 (38.1386, -0.439) -> (43.1386, -0.439)
  line L292 (43.1386, -3.239) -> (38.1386, -3.239)
  line L293 (38.1386, -1.839) -> (38.1386, -0.439)
  line L294 (38.1386, -3.239) -> (38.1386, -1.839)
  line L295 (-6.0341, -59.1148) -> (-3.8341, -59.1148)
  line L296 (-6.0341, -59.1148) -> (-6.0341, -61.4148)
  line L297 (-6.0341, -61.4148) -> (-6.0341, -63.5148)
  line L298 (-3.8341, -67.9148) -> (-3.8341, -59.1148)
  line L299 (-6.0341, -61.4148) -> (-6.0341, -67.9148)
  line L300 (-6.0341, -67.9148) -> (-3.8341, -67.9148)
  line L301 (-6.0341, -43.8368) -> (-5.3341, -43.8368)
  line L302 (-5.3341, -43.8368) -> (-2.7341, -43.8368)
  line L303 (-6.0341, -43.8368) -> (-6.0341, -40.4368)
  line L304 (-6.0341, -40.4368) -> (-2.7341, -40.4368)
  line L305 (-2.7341, -40.4368) -> (-2.7341, -43.8368)
  line L306 (-6.0341, -58.1148) -> (-6.0341, -54.7148)
  line L307 (-6.0341, -58.1148) -> (-5.3341, -58.1148)
  line L308 (-6.0341, -54.7148) -> (-2.7341, -54.7148)
  line L309 (-2.7341, -54.7148) -> (-2.7341, -58.1148)
  line L310 (-5.3341, -58.1148) -> (-2.7341, -58.1148)
  line L311 (-6.0341, -72.3928) -> (-6.0341, -68.9928)
  line L312 (-6.0341, -72.3928) -> (-5.3341, -72.3928)
  line L313 (-6.0341, -68.9928) -> (-2.7341, -68.9928)
  line L314 (-2.7341, -68.9928) -> (-2.7341, -72.3928)
  line L315 (-5.3341, -72.3928) -> (-2.7341, -72.3928)
  line L316 (-6.0341, -86.6708) -> (-6.0341, -83.2708)
  line L317 (-6.0341, -86.6708) -> (-5.3341, -86.6708)
  line L318 (-6.0341, -83.2708) -> (-2.7341, -83.2708)
  line L319 (-2.7341, -83.2708) -> (-2.7341, -86.6708)
  line L320 (-5.3341, -86.6708) -> (-2.7341, -86.6708)
  line L321 (-55.8698, -22.9508) -> (-55.8698, -25.1508)
  line L322 (-55.8698, -25.1508) -> (-53.7698, -25.1508)
  line L323 (-53.7698, -25.1508) -> (-47.1198, -25.1508)
  line L324 (-47.1198, -25.1508) -> (-47.1198, -22.9508)
  line L325 (-47.1198, -22.9508) -> (-55.8698, -22.9508)
  line L326 (-55.8698, -21.9508) -> (-54.8198, -21.9508)
  line L327 (-54.8198, -21.9508) -> (-48.6198, -21.9508)
  line L328 (-55.8698, -21.9508) -> (-55.8698, -20.6508)
  line L329 (-55.8698, -20.6508) -> (-48.6198, -20.6508)
  line L330 (-48.6198, -20.6508) -> (-48.6198, -21.9508)
  line L331 (-6.0341, 40.1588) -> (-6.0341, 36.7588)
  line L332 (-6.0341, 36.7588) -> (-2.9341, 36.7588)
  line L333 (-2.9341, 36.7588) -> (-2.9341, 40.1588)
  line L334 (-2.9341, 40.1588) -> (-6.0341, 40.1588)
  line L335 (-6.0341, -82.1928) -> (-3.8341, -82.1928)
  line L336 (-6.0341, -75.6928) -> (-6.0341, -77.7928)
  line L337 (-6.0341, -75.6928) -> (-6.0341, -82.1928)
  line L338 (-3.8341, -82.1928) -> (-3.8341, -73.3928)
  line L339 (-6.0341, -73.3928) -> (-3.8341, -73.3928)
  line L340 (-6.0341, -73.3928) -> (-6.0341, -75.6928)
  line L341 (-6.0341, -96.4708) -> (-3.8341, -96.4708)
  line L342 (-6.0341, -89.9708) -> (-6.0341, -92.0708)
  line L343 (-6.0341, -89.9708) -> (-6.0341, -96.4708)
  line L344 (-3.8341, -96.4708) -> (-3.8341, -87.6708)
  line L345 (-6.0341, -87.6708) -> (-3.8341, -87.6708)
  line L346 (-6.0341, -87.6708) -> (-6.0341, -89.9708)
  line L347 (-6.0341, -53.6368) -> (-3.8341, -53.6368)
  line L348 (-6.0341, -47.1368) -> (-6.0341, -49.2368)
  line L349 (-6.0341, -47.1368) -> (-6.0341, -53.6368)
  line L350 (-3.8341, -53.6368) -> (-3.8341, -44.8368)
  line L351 (-6.0341, -44.8368) -> (-3.8341, -44.8368)
  line L352 (-6.0341, -44.8368) -> (-6.0341, -47.1368)
  line L353 (-55.8698, -9.3308) -> (-55.8698, -11.5308)
  line L354 (-47.1198, -9.3308) -> (-55.8698, -9.3308)
  line L355 (-47.1198, -11.5308) -> (-47.1198, -9.3308)
  line L356 (-53.7698, -11.5308) -> (-47.1198, -11.5308)
  line L357 (-55.8698, -11.5308) -> (-53.7698, -11.5308)
  line L358 (-54.8198, -8.3308) -> (-48.6198, -8.3308)
  line L359 (-48.6198, -7.0308) -> (-48.6198, -8.3308)
  line L360 (-55.8698, -7.0308) -> (-48.6198, -7.0308)
  line L361 (-55.8698, -8.3308) -> (-55.8698, -7.0308)
  line L362 (-55.8698, -8.3308) -> (-54.8198, -8.3308)
  line L363 (-55.8698, 4.2892) -> (-55.8698, 2.0892)
  line L364 (-47.1198, 4.2892) -> (-55.8698, 4.2892)
  line L365 (-47.1198, 2.0892) -> (-47.1198, 4.2892)
  line L366 (-53.7698, 2.0892) -> (-47.1198, 2.0892)
  line L367 (-55.8698, 2.0892) -> (-53.7698, 2.0892)
  line L368 (-54.8198, 5.2892) -> (-48.6198, 5.2892)
  line L369 (-48.6198, 6.5892) -> (-48.6198, 5.2892)
  line L370 (-55.8698, 6.5892) -> (-48.6198, 6.5892)
  line L371 (-55.8698, 5.2892) -> (-55.8698, 6.5892)
  line L372 (-55.8698, 5.2892) -> (-54.8198, 5.2892)
  line L373 (-55.8698, 17.9092) -> (-55.8698, 15.7092)
  line L374 (-47.1198, 17.9092) -> (-55.8698, 17.9092)
  line L375 (-47.1198, 15.7092) -> (-47.1198, 17.9092)
  line L376 (-53.7698, 15.7092) -> (-47.1198, 15.7092)
  line L377 (-55.8698, 15.7092) -> (-53.7698, 15.7092)
  line L378 (-54.8198, 18.9092) -> (-48.6198, 18.9092)
  line L379 (-48.6198, 20.2092) -> (-48.6198, 18.9092)
  line L380 (-55.8698, 20.2092) -> (-48.6198, 20.2092)
  line L381 (-55.8698, 18.9092) -> (-55.8698, 20.2092)
  line L382 (-55.8698, 18.9092) -> (-54.8198, 18.9092)
  line L383 (-6.0341, 41.1588) -> (-6.0341, 49.8588)
  line L384 (-6.0341, 49.8588) -> (-3.8341, 49.8588)
  line L385 (-3.8341, 49.8588) -> (-3.8341, 41.1588)
  line L386 (-3.8341, 41.1588) -> (-6.0341, 41.1588)
  line L387 (-2.9341, 51.0368) -> (-2.9341, 54.4368)
  line L388 (-6.0341, 54.4368) -> (-6.0341, 51.0368)
  line L389 (-2.9341, 54.4368) -> (-6.0341, 54.4368)
  line L390 (-6.0341, 51.0368) -> (-2.9341, 51.0368)
  line L391 (-3.8341, 55.4368) -> (-6.0341, 55.4368)
  line L392 (-6.0341, 64.1368) -> (-3.8341, 64.1368)
  line L393 (-6.0341, 55.4368) -> (-6.0341, 64.1368)
  line L394 (-3.8341, 64.1368) -> (-3.8341, 55.4368)
  line L395 (-2.9341, 65.3148) -> (-2.9341, 68.7148)
  line L396 (-6.0341, 68.7148) -> (-6.0341, 65.3148)
  line L397 (-2.9341, 68.7148) -> (-6.0341, 68.7148)
  line L398 (-6.0341, 65.3148) -> (-2.9341, 65.3148)
  line L399 (-3.8341, 69.7148) -> (-6.0341, 69.7148)
  line L400 (-6.0341, 78.4148) -> (-3.8341, 78.4148)
  line L401 (-6.0341, 69.7148) -> (-6.0341, 78.4148)
  line L402 (-3.8341, 78.4148) -> (-3.8341, 69.7148)
  line L403 (-2.9341, 79.5928) -> (-2.9341, 82.9928)
  line L404 (-6.0341, 82.9928) -> (-6.0341, 79.5928)
  line L405 (-2.9341, 82.9928) -> (-6.0341, 82.9928)
  line L406 (-6.0341, 79.5928) -> (-2.9341, 79.5928)
  line L407 (-3.8341, 83.9928) -> (-6.0341, 83.9928)
  line L408 (-6.0341, 92.6928) -> (-3.8341, 92.6928)
  line L409 (-6.0341, 83.9928) -> (-6.0341, 92.6928)
  line L410 (-3.8341, 92.6928) -> (-3.8341, 83.9928)
  line L411 (83.614, -1.839) -> (92.364, -1.839)
  line L412 (83.614, -1.839) -> (92.364, -1.839) construction
  arc A3 (81.8808, -49.77) -> (85.0786, -49.2607) centre (83.295, -48.3558) ccw
  line L413 (81.8808, -49.77) -> (71.0762, -38.9655)
  arc A4 (85.0786, -49.2607) -> (85.0786, 45.75) centre (-8.5603, -1.7554) ccw
  line L414 (81.8808, 46.2593) -> (71.0762, 35.4548)
  arc A5 (85.0786, 45.75) -> (81.8808, 46.2593) centre (83.295, 44.8451) ccw
  arc A6 (85.8036, -39.0594) -> (85.8533, 35.4227) centre (-8.5603, -1.7554) ccw
  line L415 (81.4397, -1.7554) -> (81.4397, 38.2446)
  circle A7 centre (81.4397, 38.2446) radius 2.5
  circle A8 centre (81.4397, -41.7554) radius 2.5
  arc A9 (84.4097, -48.9214) -> (84.4097, 45.4107) centre (-8.5603, -1.7554) ccw
  line L416 (84.4097, -48.9214) -> (76.533, -41.0447)
  line L417 (84.4097, 45.4107) -> (76.4785, 37.4794)
  arc A10 (76.4785, 37.4794) -> (85.8533, 35.4227) centre (81.9578, 40.0608) ccw
  arc A11 (85.8533, -39.1007) -> (76.4785, -41.1574) centre (81.9578, -43.7388) ccw
  point P0 (0, 0)
  point P1 (0, 0)
  dimension "d0" = 2.3
  dimension "d1" = 2.1
  dimension "d2" = 6.5
  dimension "d3" = 2.2
  dimension "d4" = 0.7
  dimension "d5" = 2.6
  dimension "d6" = 3.4
  dimension "d7" = 0.7
  dimension "d8" = 2.6
  dimension "d9" = 3.4
  dimension "d10" = 2.6
  dimension "d11" = 3.4
  dimension "d12" = 0.7
  dimension "d13" = 2.6
  dimension "d14" = 3.4
  dimension "d15" = 2.2
  dimension "d16" = 1.3
  dimension "d17" = 3.4
  dimension "d18" = 3.1
  dimension "d19" = 5
  dimension "d20" = 5
  dimension "d21" = 5
  dimension "d22" = 5
  dimension "d23" = 8.8
  dimension "d24" = 2.3
  dimension "d25" = 2.1
  dimension "d26" = 6.5
  dimension "d27" = 2.2
  dimension "d28" = 8.8
  dimension "d29" = 2.3
  dimension "d30" = 2.1
  dimension "d31" = 6.5
  dimension "d32" = 2.2
  dimension "d33" = 8.8
  dimension "d34" = 2.3
  dimension "d35" = 2.1
  dimension "d36" = 6.5
  dimension "d37" = 2.2
  dimension "d38" = 8.8
  dimension "d39" = 8.75
  dimension "d40" = 7.25
  dimension "d41" = 2.2
  dimension "d42" = 1.3
  dimension "d43" = 8.75
  dimension "d44" = 7.25
  dimension "d45" = 2.2
  dimension "d46" = 1.3
  dimension "d47" = 8.75
  dimension "d48" = 7.25
  dimension "d49" = 2.2
  dimension "d50" = 1.3
  dimension "d51" = 8.75
  dimension "d52" = 7.25
  dimension "d53" = 8.7
  dimension "d54" = 2.2
  dimension "d55" = 3.4
  dimension "d56" = 3.1
  dimension "d57" = 8.7
  dimension "d58" = 2.2
  dimension "d59" = 3.4
  dimension "d60" = 3.1
  dimension "d61" = 8.7
  dimension "d62" = 2.2
  dimension "d63" = 3.4
extrude "Extrusion1" add sketch "Sketch1" along normal blind 40 contours A6 A10 L417 A9 L416 A11
fillet "Fillet1" radius 2 6 edges at (-84.4097, 20, -48.9214) (-76.533, 20, -41.0447) (-84.4097, 20, 45.4107) (-85.8533, 20, 35.4227) (-76.4785, 20, 37.4794) (-85.8036, 20, -39.0594)
properties part number "back plate"
